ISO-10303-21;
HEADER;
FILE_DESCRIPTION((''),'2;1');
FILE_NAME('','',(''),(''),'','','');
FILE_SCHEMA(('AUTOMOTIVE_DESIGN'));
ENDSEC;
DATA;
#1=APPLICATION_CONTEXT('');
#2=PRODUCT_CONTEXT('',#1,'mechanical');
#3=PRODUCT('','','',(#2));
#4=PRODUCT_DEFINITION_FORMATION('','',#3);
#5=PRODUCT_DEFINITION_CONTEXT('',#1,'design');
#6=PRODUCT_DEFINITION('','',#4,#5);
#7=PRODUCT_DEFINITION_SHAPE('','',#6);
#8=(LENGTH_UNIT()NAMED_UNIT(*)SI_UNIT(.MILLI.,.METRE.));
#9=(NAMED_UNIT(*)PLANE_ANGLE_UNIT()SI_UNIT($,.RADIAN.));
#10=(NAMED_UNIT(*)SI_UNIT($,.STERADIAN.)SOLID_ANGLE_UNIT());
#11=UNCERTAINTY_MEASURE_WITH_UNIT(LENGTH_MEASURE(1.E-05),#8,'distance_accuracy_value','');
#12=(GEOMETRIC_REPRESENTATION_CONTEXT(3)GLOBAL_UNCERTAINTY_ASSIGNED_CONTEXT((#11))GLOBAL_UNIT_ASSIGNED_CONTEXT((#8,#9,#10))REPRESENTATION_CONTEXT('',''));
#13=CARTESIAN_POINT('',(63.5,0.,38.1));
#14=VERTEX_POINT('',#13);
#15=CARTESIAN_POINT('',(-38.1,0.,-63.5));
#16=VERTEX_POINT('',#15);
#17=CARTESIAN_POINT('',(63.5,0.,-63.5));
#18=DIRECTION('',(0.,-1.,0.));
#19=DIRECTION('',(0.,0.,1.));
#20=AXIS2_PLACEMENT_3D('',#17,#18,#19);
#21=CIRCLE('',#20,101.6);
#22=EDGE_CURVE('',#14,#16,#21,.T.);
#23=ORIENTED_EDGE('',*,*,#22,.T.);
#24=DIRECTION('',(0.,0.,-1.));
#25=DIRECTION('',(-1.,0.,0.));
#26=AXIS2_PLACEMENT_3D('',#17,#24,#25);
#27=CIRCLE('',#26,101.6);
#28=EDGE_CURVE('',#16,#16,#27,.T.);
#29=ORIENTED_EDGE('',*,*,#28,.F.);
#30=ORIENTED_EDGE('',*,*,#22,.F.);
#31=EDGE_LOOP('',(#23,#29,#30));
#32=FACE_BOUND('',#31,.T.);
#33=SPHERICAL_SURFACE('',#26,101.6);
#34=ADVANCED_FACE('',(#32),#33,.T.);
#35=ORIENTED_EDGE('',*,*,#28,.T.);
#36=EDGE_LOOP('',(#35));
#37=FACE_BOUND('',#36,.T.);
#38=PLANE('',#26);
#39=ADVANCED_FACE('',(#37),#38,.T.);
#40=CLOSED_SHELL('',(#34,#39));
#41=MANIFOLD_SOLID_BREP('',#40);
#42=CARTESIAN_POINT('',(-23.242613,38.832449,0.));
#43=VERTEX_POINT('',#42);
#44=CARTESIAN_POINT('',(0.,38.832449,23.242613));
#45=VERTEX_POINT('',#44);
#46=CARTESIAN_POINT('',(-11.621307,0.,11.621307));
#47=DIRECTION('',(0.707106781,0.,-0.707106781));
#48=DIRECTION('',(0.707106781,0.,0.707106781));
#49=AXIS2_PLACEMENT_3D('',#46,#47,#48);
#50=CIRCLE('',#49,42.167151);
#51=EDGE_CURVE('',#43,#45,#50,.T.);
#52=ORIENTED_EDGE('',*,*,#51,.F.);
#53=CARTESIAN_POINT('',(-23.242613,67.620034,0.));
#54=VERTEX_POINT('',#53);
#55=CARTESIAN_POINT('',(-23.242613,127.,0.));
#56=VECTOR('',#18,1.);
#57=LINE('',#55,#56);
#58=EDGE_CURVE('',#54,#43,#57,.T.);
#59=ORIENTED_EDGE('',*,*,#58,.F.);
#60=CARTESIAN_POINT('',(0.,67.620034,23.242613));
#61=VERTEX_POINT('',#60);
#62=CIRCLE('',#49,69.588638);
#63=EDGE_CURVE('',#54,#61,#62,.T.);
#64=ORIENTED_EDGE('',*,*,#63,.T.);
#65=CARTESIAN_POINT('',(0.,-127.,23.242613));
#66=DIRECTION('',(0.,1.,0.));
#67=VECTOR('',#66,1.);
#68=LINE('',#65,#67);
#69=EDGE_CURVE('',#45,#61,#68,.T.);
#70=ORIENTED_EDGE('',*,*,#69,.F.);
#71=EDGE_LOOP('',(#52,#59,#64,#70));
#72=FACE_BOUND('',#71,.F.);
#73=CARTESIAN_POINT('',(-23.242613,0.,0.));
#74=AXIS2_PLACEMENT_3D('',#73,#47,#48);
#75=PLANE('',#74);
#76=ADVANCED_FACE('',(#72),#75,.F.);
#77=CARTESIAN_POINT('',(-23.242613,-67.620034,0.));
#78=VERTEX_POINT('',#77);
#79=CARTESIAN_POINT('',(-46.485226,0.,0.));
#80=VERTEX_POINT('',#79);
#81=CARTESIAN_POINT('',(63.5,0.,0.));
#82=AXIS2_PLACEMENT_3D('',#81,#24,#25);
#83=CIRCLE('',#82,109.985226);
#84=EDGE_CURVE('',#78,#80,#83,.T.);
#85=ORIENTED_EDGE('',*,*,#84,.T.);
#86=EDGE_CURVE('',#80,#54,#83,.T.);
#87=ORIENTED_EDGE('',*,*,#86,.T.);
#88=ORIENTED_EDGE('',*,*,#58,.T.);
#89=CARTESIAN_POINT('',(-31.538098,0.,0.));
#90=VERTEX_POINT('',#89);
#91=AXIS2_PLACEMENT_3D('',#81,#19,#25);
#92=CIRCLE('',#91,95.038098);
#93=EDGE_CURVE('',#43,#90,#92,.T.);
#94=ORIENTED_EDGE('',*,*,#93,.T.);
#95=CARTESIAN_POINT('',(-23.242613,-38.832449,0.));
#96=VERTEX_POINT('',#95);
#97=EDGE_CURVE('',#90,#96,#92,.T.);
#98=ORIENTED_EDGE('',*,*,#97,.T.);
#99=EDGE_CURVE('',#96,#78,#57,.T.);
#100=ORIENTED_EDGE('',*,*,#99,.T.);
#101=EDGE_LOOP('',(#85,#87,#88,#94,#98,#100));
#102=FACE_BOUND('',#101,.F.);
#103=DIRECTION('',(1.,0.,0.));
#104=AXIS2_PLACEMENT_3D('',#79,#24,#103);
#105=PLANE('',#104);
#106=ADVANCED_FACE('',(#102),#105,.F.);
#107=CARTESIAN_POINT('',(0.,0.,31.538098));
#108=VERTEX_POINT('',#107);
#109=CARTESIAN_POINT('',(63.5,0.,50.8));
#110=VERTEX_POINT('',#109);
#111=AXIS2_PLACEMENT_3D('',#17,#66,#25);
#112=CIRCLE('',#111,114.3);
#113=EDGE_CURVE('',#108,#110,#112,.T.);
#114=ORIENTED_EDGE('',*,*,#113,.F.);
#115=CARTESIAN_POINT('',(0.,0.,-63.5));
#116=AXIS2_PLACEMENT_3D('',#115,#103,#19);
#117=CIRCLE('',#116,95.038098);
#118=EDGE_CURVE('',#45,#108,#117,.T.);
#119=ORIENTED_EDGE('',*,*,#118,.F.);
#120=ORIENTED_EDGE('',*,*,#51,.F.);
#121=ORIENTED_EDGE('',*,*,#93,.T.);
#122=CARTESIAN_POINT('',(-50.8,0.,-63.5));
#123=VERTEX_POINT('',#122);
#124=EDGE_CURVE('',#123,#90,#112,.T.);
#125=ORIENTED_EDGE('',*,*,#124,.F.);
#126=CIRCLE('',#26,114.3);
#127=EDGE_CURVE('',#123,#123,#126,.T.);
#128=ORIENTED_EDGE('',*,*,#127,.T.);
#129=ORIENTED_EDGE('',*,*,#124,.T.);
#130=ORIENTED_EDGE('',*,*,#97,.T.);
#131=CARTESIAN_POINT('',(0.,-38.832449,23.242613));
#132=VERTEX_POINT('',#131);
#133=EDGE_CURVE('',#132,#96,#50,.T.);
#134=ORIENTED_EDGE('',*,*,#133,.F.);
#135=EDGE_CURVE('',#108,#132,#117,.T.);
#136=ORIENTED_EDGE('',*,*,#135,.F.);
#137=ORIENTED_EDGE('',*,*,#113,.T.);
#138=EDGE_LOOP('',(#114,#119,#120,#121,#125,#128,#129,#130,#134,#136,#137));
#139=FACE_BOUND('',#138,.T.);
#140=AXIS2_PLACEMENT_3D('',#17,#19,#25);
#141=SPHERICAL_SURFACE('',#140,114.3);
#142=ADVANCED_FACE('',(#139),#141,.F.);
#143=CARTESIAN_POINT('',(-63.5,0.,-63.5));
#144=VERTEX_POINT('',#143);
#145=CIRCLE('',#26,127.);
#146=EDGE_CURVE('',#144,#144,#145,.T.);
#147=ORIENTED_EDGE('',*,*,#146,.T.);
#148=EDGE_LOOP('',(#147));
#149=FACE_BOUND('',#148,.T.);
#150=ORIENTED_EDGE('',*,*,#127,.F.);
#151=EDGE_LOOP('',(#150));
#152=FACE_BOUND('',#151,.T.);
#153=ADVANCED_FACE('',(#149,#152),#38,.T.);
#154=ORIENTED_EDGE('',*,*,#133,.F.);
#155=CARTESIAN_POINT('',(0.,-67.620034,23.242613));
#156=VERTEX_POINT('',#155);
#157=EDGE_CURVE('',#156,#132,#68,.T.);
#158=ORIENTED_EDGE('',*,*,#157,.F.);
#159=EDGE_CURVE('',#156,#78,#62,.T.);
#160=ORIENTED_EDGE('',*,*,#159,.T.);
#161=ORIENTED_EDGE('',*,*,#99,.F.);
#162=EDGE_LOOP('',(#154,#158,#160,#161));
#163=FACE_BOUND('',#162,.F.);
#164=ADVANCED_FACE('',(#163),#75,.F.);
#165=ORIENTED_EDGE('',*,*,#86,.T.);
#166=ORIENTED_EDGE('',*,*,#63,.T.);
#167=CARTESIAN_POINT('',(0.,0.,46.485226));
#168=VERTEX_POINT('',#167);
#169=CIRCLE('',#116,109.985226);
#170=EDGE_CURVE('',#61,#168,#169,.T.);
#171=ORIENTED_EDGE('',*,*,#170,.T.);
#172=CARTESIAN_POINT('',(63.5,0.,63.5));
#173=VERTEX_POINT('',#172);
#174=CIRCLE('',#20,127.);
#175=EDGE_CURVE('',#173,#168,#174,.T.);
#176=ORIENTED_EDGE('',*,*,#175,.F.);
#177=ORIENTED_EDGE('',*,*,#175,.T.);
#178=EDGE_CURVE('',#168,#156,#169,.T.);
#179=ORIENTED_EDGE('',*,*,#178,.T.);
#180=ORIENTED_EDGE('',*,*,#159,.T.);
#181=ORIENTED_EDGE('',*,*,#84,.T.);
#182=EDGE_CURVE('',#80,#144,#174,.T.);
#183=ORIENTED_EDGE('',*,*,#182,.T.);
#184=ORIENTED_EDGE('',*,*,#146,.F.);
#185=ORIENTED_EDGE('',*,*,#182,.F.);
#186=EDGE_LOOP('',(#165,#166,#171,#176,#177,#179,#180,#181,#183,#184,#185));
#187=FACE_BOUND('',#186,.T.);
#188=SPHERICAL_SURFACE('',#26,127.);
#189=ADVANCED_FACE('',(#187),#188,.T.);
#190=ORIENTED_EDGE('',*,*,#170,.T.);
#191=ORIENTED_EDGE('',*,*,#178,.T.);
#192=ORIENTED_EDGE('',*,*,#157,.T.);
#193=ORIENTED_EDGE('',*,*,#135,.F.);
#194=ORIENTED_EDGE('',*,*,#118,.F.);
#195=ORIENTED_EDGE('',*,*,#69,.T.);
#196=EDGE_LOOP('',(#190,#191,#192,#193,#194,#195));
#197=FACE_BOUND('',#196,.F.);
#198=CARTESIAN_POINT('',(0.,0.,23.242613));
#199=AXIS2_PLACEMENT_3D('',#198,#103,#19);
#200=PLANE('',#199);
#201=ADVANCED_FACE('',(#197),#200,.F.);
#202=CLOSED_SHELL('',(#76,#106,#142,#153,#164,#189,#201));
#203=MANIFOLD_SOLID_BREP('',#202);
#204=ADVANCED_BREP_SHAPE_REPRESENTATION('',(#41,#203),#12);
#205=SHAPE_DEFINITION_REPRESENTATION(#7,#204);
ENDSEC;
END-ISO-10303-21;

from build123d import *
from build123d import SkipClean  # not in build123d's __all__

# Parameters (mm, degrees)
F3_DEPTH = 127


with BuildPart() as f1:
    # F0 (on Front) → F1 (revolve)
    with BuildSketch(Plane.XZ):
        with BuildLine():
            Line((-63.5, -63.5), (-50.8, -63.5))
            ThreePointArc((-50.8, -63.5), (-17.3223050896, 17.3223050896), (63.5, 50.8))
            Line((63.5, 50.8), (63.5, 63.5))
            ThreePointArc((63.5, 63.5), (-26.3025612107, 26.3025612107), (-63.5, -63.5))
        make_face()
    revolve(axis=Axis((63.5, 0, 0), (0, 0, -1)))

    # F2 (on Front) → F3 (cut, symmetric)
    with BuildSketch(Plane.XZ):
        with BuildLine():
            Line((-46.4852262806, 0), (0, 46.4852262806))
            ThreePointArc((0, 46.4852262806), (-26.3025612107, 26.3025612107), (-46.4852262806, 0))
        make_face()
        Polygon((0, 23.2426131403), (0, 46.4852262806), (-46.4852262806, 0), (-23.2426131403, 0), align=None)
    with SkipClean():  # cleaning this boolean's faces spoils the solid; the shape is the same uncleaned
        extrude(amount=F3_DEPTH, both=True, mode=Mode.SUBTRACT)


with BuildPart() as f1b:
    # F0 (on Front) → F1, piece 2 (revolve)
    with BuildSketch(Plane.XZ):
        with BuildLine():
            Line((-38.1, -63.5), (63.5, -63.5))
            Line((63.5, -63.5), (63.5, 38.1))
            ThreePointArc((63.5, 38.1), (-8.3420489686, 8.3420489686), (-38.1, -63.5))
        make_face()
    revolve(axis=Axis((63.5, 0, 0), (0, 0, -1)))


solid = Compound([f1.part, f1b.part])
